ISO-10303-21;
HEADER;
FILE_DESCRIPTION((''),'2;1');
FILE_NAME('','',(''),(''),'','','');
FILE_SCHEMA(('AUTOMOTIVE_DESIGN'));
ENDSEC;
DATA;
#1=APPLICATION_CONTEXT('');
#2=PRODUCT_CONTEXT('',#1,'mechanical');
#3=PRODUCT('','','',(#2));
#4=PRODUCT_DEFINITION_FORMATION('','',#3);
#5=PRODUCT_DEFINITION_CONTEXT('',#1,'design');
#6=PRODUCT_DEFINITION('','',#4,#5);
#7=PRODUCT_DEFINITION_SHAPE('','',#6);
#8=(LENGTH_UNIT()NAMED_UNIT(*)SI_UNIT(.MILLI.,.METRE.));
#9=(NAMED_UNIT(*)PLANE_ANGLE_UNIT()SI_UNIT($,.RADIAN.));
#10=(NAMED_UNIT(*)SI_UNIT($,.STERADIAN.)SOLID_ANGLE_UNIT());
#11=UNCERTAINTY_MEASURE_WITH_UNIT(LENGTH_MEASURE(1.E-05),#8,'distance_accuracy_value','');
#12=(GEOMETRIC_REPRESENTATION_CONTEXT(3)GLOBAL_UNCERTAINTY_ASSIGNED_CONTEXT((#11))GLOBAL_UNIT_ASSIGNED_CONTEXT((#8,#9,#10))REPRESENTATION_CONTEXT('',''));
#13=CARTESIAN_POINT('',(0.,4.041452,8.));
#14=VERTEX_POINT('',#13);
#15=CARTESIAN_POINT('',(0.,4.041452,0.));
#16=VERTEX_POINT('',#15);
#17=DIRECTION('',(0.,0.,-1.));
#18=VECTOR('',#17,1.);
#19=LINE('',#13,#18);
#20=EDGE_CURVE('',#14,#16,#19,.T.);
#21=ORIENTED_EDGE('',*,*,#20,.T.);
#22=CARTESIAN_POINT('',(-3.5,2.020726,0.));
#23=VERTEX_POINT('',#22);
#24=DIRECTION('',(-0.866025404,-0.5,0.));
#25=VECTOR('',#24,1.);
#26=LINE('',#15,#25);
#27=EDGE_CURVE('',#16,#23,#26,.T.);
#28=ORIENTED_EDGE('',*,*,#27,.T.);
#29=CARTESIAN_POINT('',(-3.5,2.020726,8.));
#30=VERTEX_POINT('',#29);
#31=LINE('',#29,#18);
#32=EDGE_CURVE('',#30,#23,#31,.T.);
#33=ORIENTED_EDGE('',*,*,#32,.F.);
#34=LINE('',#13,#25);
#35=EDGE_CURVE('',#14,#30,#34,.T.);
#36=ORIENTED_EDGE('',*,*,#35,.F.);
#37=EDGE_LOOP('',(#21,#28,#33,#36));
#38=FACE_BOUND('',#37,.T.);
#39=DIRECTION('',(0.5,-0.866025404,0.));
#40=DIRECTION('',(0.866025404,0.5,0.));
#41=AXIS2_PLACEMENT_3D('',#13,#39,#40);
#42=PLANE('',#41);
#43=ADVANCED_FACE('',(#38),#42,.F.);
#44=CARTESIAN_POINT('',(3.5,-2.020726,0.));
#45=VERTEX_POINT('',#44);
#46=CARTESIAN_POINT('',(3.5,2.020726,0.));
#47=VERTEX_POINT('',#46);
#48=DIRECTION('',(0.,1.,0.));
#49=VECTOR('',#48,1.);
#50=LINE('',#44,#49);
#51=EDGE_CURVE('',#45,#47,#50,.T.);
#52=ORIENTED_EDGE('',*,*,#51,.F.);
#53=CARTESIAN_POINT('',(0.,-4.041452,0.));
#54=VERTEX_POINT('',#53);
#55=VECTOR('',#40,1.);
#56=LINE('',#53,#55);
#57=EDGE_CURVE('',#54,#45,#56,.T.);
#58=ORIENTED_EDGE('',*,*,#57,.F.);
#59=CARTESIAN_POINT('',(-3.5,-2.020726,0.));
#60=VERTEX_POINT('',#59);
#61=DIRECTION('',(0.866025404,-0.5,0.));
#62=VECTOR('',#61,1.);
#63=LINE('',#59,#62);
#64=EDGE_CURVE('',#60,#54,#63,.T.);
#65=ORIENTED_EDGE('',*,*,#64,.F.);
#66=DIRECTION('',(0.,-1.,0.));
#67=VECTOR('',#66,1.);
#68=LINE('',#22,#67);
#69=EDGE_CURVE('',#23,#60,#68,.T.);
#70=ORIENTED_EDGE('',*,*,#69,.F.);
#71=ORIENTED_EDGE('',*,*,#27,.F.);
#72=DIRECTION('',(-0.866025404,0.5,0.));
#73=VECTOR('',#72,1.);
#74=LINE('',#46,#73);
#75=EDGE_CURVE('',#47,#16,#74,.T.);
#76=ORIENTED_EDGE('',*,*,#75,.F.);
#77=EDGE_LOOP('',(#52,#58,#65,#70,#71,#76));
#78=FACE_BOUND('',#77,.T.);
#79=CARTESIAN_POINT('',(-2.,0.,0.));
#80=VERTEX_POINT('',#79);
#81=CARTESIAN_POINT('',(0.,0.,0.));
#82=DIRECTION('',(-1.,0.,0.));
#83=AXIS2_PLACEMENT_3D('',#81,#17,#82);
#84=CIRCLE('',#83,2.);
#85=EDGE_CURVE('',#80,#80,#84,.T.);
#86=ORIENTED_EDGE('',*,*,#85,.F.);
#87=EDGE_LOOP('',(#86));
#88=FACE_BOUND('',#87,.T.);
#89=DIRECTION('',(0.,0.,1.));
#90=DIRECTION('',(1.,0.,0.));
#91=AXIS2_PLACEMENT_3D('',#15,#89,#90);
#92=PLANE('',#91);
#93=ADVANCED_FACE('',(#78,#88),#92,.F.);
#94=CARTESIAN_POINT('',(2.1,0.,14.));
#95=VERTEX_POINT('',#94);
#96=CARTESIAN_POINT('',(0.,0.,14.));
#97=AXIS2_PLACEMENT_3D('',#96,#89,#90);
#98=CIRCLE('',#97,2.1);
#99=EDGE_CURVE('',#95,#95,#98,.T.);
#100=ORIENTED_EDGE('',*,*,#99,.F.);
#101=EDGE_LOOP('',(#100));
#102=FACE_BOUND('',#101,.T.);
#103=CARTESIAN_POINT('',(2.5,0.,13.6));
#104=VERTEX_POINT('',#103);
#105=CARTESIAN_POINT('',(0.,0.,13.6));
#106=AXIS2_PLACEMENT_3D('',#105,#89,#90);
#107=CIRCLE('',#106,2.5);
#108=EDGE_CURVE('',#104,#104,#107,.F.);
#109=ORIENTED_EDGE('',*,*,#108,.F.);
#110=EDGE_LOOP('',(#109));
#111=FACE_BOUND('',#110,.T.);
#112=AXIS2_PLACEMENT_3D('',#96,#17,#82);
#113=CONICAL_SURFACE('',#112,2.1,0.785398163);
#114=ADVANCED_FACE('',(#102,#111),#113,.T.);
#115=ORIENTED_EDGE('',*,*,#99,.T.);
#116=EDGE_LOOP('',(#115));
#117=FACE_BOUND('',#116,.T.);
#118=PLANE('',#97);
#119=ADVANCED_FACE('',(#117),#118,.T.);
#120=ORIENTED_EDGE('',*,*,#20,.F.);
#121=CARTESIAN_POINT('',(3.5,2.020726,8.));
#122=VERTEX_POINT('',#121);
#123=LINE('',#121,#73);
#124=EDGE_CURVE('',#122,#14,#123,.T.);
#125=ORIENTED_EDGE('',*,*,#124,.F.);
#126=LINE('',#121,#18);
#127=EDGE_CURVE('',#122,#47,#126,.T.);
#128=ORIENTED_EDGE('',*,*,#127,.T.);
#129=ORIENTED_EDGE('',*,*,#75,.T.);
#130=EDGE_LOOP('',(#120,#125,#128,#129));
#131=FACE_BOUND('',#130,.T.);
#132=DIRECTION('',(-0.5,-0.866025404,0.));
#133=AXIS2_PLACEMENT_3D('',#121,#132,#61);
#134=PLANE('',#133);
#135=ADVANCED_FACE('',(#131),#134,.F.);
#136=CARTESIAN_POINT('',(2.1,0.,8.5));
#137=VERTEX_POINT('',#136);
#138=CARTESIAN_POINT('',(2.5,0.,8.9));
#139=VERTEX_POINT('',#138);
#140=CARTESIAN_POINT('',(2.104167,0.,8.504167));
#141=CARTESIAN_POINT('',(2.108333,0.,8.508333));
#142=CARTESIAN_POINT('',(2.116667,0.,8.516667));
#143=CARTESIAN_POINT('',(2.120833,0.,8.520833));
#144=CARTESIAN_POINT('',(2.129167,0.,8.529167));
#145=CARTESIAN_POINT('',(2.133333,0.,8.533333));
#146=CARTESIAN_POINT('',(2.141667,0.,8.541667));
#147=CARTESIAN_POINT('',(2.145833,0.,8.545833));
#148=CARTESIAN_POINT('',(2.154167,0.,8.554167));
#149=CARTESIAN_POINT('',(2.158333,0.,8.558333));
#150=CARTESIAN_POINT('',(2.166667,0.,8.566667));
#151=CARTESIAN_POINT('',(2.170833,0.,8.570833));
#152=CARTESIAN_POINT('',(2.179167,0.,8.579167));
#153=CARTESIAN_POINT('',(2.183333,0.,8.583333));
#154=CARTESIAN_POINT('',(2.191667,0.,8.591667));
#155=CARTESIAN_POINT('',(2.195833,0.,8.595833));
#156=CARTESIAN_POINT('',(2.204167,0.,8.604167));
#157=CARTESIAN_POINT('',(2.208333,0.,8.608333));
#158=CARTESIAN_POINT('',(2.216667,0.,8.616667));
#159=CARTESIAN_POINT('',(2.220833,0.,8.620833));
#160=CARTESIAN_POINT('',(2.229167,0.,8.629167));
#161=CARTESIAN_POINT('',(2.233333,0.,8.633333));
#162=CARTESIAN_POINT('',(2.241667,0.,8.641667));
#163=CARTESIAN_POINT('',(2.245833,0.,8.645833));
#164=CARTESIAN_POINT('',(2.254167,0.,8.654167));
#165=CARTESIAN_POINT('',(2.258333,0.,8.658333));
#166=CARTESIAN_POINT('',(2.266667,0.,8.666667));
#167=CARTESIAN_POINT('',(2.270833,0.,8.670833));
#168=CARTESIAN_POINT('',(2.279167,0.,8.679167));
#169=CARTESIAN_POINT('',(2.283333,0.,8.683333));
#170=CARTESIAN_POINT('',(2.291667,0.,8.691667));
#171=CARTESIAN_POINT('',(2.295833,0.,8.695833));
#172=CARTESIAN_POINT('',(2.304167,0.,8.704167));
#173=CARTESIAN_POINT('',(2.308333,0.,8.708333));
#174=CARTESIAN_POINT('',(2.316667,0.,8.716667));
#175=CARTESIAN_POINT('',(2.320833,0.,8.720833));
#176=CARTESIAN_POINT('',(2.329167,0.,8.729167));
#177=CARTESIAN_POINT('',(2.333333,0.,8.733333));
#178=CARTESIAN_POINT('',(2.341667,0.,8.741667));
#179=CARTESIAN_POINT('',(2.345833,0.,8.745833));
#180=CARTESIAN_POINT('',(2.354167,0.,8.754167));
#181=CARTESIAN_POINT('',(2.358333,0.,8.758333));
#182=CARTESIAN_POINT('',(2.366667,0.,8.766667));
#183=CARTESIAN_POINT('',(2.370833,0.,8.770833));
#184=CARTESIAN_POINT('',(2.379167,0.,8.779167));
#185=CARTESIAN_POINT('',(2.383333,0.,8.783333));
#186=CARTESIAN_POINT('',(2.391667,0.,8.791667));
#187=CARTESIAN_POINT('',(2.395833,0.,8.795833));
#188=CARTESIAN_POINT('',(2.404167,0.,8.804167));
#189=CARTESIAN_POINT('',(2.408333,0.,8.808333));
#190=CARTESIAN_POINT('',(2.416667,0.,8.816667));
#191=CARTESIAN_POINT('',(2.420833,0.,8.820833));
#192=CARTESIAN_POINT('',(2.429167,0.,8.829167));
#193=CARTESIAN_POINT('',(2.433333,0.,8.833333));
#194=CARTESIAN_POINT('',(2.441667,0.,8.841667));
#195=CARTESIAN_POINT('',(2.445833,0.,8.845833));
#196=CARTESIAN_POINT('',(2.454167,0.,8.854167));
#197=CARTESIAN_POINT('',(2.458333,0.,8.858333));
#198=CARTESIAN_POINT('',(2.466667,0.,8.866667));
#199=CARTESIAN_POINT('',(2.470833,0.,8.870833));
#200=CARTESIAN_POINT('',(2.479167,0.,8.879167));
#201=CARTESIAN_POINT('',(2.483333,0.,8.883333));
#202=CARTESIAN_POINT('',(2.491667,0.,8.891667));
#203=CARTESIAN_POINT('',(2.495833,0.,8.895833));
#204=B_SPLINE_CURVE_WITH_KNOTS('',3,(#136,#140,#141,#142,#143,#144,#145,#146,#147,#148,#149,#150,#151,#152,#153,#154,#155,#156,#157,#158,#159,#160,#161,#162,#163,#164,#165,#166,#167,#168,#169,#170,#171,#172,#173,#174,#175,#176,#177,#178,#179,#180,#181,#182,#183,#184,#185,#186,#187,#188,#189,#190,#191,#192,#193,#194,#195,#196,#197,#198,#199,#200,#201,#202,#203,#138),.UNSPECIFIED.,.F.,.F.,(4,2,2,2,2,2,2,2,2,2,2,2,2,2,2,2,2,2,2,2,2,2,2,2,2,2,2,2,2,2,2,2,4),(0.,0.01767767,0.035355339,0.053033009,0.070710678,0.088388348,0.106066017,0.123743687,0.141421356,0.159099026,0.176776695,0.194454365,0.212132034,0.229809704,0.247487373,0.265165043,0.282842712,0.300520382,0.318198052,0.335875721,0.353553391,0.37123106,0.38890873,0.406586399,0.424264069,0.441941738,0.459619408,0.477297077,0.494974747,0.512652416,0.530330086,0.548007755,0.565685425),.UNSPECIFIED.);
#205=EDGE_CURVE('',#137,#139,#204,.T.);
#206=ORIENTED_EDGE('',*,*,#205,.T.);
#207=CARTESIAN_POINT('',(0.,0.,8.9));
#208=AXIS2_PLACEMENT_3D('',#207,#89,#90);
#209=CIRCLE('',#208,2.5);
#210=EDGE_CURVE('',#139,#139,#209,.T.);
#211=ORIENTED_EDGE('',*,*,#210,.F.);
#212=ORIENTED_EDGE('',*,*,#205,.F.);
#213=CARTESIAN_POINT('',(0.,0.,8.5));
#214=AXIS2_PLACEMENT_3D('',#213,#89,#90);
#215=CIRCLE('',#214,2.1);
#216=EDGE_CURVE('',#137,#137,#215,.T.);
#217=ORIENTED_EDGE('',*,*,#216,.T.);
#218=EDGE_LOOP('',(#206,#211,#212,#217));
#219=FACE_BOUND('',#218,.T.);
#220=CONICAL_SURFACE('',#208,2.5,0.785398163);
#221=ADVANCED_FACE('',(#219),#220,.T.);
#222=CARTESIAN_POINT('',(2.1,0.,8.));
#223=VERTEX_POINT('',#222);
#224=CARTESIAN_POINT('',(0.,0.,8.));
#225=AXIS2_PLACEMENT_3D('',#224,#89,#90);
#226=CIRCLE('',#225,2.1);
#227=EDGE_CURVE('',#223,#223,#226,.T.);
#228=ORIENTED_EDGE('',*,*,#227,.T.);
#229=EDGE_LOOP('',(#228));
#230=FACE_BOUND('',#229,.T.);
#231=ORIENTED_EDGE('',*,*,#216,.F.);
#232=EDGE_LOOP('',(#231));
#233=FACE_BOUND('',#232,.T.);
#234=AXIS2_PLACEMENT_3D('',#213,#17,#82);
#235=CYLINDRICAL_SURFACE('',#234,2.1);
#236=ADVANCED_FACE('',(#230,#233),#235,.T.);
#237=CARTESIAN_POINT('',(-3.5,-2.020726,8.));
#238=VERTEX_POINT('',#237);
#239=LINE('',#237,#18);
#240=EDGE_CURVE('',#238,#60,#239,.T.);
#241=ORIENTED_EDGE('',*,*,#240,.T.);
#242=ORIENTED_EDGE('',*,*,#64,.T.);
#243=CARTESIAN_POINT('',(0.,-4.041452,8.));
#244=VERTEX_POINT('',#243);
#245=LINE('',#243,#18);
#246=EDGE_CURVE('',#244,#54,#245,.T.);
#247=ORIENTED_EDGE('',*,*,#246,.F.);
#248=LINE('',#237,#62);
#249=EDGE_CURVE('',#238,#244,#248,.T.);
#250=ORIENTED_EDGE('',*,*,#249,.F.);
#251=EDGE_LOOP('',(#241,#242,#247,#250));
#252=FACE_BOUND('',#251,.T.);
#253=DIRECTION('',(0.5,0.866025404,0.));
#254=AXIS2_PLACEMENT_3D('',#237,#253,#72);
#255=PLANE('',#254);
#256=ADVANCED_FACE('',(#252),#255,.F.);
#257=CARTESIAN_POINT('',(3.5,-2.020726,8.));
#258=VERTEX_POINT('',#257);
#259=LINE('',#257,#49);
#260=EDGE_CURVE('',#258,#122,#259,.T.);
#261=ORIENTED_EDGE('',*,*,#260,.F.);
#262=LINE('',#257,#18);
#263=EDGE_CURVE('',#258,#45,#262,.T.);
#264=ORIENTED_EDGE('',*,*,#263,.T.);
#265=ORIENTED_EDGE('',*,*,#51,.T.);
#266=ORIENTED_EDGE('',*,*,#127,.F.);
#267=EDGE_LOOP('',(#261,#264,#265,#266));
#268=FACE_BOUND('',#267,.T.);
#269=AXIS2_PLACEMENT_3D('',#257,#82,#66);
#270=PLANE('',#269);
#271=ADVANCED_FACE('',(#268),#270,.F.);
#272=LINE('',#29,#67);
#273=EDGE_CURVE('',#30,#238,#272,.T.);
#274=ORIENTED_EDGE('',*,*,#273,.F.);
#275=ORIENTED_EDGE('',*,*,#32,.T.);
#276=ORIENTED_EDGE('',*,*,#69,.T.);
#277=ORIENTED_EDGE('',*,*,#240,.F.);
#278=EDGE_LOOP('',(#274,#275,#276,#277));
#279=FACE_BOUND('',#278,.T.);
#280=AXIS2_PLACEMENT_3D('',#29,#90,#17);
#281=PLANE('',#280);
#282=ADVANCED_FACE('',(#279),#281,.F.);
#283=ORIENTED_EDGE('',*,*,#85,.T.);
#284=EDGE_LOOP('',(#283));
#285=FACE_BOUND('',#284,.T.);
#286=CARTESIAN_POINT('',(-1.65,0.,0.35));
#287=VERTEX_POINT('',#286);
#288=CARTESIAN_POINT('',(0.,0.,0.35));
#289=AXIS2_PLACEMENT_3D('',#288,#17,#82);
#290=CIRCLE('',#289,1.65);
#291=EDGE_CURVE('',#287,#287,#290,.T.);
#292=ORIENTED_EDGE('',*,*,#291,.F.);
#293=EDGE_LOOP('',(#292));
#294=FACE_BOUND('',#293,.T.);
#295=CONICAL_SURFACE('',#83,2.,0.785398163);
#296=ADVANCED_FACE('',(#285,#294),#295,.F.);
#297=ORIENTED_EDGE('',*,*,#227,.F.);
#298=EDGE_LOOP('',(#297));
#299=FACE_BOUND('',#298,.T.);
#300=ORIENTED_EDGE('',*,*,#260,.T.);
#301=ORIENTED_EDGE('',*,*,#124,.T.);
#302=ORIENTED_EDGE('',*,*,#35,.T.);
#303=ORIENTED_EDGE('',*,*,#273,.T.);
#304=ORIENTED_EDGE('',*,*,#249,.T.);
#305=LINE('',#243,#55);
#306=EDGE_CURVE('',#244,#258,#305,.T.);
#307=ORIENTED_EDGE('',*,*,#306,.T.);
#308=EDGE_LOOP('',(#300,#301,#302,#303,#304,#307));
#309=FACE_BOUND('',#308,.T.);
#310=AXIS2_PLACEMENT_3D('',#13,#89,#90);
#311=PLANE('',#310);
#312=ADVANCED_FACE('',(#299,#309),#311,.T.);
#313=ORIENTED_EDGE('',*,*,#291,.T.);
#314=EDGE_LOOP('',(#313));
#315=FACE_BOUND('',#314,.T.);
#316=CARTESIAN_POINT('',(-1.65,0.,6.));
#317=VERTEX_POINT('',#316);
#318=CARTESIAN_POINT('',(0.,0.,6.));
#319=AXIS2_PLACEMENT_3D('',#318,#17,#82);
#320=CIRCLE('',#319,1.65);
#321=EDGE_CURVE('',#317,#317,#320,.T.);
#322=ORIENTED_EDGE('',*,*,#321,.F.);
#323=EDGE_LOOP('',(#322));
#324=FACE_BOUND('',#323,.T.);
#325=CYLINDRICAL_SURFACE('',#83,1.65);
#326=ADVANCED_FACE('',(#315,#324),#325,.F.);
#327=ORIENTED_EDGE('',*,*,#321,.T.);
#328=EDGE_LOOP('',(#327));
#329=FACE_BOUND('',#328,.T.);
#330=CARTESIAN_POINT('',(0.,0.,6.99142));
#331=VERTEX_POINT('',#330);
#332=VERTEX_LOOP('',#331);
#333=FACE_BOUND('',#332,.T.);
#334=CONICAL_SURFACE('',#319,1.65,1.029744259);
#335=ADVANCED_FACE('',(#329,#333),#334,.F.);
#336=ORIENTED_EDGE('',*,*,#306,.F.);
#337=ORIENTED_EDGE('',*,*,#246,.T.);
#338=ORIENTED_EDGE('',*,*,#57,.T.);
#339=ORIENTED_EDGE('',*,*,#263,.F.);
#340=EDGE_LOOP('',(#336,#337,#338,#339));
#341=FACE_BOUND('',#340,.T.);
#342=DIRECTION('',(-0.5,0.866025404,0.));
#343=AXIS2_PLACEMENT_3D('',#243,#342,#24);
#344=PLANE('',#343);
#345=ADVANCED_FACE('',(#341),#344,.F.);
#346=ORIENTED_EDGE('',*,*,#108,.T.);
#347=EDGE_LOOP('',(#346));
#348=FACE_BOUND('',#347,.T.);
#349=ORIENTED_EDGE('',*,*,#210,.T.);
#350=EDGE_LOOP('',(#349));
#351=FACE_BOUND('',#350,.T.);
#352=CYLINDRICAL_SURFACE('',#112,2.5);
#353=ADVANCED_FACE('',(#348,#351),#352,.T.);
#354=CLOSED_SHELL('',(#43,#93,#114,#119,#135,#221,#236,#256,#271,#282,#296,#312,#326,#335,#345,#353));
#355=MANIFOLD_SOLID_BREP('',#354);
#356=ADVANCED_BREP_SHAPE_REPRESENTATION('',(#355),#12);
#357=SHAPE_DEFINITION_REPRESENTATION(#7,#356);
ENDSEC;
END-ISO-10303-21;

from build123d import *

# Parameters (mm, degrees)
EXTRUDE_1_DEPTH             = 8
SKETCH_2_R                  = 2.5
EXTRUDE_2_DEPTH             = 6
SKETCH_3_R                  = 2.5
SKETCH_3_R_2                = 2.1
CUT_EXTRUDE_3_DEPTH         = 0.5
CHAMFER_1_SIZE              = 0.4
HOLE_WIZARD_M41_D           = 3.3
HOLE_WIZARD_M41_DEPTH       = 6
HOLE_WIZARD_M41_CSINK_D     = 4
HOLE_WIZARD_M41_CSINK_ANGLE = 90
HOLE_WIZARD_M41_TIP         = 0.991420021


with BuildPart() as part:
    # Эскиз1 → Вытянуть1 (new body)
    with BuildSketch(Plane.XY):
        Polygon((0, 4.041451884), (-3.5, 2.020725942), (-3.5, -2.020725942), (0, -4.041451884), (3.5, -2.020725942), (3.5, 2.020725942), align=None)
    extrude(amount=EXTRUDE_1_DEPTH)

    # Эскиз2 → Вытянуть2 (add)
    with BuildSketch(Plane.XY.offset(8)):
        Circle(SKETCH_2_R)
    extrude(amount=EXTRUDE_2_DEPTH)

    # Эскиз3 → Вырез-Вытянуть3 (cut)
    with BuildSketch(Plane.XY.offset(8)):
        Circle(SKETCH_3_R)
        Circle(SKETCH_3_R_2, mode=Mode.SUBTRACT)
    extrude(amount=CUT_EXTRUDE_3_DEPTH, mode=Mode.SUBTRACT)

    # Фаска1
    chamfer_1_edges = [part.edges().sort_by_distance(p)[0] for p in [
        (-2.5, 0, 8.5),
        (-2.5, 0, 14),
    ]]
    chamfer(chamfer_1_edges, length=CHAMFER_1_SIZE - 0.0001)  # a hair under: the kernel refuses the full size

    # Отверстие с зазором M41
    with Locations(Plane(origin=(0, 0, 0), x_dir=(-1, 0, 0), z_dir=(0, 0, -1))):
        with Locations((0, 0)):
            CounterSinkHole(HOLE_WIZARD_M41_D / 2, HOLE_WIZARD_M41_CSINK_D / 2, depth=HOLE_WIZARD_M41_DEPTH, counter_sink_angle=HOLE_WIZARD_M41_CSINK_ANGLE)
            with Locations((0, 0, -(HOLE_WIZARD_M41_DEPTH + HOLE_WIZARD_M41_TIP / 2))):  # 118° drill point
                Cone(0, HOLE_WIZARD_M41_D / 2, HOLE_WIZARD_M41_TIP, mode=Mode.SUBTRACT)


solid = part.part
